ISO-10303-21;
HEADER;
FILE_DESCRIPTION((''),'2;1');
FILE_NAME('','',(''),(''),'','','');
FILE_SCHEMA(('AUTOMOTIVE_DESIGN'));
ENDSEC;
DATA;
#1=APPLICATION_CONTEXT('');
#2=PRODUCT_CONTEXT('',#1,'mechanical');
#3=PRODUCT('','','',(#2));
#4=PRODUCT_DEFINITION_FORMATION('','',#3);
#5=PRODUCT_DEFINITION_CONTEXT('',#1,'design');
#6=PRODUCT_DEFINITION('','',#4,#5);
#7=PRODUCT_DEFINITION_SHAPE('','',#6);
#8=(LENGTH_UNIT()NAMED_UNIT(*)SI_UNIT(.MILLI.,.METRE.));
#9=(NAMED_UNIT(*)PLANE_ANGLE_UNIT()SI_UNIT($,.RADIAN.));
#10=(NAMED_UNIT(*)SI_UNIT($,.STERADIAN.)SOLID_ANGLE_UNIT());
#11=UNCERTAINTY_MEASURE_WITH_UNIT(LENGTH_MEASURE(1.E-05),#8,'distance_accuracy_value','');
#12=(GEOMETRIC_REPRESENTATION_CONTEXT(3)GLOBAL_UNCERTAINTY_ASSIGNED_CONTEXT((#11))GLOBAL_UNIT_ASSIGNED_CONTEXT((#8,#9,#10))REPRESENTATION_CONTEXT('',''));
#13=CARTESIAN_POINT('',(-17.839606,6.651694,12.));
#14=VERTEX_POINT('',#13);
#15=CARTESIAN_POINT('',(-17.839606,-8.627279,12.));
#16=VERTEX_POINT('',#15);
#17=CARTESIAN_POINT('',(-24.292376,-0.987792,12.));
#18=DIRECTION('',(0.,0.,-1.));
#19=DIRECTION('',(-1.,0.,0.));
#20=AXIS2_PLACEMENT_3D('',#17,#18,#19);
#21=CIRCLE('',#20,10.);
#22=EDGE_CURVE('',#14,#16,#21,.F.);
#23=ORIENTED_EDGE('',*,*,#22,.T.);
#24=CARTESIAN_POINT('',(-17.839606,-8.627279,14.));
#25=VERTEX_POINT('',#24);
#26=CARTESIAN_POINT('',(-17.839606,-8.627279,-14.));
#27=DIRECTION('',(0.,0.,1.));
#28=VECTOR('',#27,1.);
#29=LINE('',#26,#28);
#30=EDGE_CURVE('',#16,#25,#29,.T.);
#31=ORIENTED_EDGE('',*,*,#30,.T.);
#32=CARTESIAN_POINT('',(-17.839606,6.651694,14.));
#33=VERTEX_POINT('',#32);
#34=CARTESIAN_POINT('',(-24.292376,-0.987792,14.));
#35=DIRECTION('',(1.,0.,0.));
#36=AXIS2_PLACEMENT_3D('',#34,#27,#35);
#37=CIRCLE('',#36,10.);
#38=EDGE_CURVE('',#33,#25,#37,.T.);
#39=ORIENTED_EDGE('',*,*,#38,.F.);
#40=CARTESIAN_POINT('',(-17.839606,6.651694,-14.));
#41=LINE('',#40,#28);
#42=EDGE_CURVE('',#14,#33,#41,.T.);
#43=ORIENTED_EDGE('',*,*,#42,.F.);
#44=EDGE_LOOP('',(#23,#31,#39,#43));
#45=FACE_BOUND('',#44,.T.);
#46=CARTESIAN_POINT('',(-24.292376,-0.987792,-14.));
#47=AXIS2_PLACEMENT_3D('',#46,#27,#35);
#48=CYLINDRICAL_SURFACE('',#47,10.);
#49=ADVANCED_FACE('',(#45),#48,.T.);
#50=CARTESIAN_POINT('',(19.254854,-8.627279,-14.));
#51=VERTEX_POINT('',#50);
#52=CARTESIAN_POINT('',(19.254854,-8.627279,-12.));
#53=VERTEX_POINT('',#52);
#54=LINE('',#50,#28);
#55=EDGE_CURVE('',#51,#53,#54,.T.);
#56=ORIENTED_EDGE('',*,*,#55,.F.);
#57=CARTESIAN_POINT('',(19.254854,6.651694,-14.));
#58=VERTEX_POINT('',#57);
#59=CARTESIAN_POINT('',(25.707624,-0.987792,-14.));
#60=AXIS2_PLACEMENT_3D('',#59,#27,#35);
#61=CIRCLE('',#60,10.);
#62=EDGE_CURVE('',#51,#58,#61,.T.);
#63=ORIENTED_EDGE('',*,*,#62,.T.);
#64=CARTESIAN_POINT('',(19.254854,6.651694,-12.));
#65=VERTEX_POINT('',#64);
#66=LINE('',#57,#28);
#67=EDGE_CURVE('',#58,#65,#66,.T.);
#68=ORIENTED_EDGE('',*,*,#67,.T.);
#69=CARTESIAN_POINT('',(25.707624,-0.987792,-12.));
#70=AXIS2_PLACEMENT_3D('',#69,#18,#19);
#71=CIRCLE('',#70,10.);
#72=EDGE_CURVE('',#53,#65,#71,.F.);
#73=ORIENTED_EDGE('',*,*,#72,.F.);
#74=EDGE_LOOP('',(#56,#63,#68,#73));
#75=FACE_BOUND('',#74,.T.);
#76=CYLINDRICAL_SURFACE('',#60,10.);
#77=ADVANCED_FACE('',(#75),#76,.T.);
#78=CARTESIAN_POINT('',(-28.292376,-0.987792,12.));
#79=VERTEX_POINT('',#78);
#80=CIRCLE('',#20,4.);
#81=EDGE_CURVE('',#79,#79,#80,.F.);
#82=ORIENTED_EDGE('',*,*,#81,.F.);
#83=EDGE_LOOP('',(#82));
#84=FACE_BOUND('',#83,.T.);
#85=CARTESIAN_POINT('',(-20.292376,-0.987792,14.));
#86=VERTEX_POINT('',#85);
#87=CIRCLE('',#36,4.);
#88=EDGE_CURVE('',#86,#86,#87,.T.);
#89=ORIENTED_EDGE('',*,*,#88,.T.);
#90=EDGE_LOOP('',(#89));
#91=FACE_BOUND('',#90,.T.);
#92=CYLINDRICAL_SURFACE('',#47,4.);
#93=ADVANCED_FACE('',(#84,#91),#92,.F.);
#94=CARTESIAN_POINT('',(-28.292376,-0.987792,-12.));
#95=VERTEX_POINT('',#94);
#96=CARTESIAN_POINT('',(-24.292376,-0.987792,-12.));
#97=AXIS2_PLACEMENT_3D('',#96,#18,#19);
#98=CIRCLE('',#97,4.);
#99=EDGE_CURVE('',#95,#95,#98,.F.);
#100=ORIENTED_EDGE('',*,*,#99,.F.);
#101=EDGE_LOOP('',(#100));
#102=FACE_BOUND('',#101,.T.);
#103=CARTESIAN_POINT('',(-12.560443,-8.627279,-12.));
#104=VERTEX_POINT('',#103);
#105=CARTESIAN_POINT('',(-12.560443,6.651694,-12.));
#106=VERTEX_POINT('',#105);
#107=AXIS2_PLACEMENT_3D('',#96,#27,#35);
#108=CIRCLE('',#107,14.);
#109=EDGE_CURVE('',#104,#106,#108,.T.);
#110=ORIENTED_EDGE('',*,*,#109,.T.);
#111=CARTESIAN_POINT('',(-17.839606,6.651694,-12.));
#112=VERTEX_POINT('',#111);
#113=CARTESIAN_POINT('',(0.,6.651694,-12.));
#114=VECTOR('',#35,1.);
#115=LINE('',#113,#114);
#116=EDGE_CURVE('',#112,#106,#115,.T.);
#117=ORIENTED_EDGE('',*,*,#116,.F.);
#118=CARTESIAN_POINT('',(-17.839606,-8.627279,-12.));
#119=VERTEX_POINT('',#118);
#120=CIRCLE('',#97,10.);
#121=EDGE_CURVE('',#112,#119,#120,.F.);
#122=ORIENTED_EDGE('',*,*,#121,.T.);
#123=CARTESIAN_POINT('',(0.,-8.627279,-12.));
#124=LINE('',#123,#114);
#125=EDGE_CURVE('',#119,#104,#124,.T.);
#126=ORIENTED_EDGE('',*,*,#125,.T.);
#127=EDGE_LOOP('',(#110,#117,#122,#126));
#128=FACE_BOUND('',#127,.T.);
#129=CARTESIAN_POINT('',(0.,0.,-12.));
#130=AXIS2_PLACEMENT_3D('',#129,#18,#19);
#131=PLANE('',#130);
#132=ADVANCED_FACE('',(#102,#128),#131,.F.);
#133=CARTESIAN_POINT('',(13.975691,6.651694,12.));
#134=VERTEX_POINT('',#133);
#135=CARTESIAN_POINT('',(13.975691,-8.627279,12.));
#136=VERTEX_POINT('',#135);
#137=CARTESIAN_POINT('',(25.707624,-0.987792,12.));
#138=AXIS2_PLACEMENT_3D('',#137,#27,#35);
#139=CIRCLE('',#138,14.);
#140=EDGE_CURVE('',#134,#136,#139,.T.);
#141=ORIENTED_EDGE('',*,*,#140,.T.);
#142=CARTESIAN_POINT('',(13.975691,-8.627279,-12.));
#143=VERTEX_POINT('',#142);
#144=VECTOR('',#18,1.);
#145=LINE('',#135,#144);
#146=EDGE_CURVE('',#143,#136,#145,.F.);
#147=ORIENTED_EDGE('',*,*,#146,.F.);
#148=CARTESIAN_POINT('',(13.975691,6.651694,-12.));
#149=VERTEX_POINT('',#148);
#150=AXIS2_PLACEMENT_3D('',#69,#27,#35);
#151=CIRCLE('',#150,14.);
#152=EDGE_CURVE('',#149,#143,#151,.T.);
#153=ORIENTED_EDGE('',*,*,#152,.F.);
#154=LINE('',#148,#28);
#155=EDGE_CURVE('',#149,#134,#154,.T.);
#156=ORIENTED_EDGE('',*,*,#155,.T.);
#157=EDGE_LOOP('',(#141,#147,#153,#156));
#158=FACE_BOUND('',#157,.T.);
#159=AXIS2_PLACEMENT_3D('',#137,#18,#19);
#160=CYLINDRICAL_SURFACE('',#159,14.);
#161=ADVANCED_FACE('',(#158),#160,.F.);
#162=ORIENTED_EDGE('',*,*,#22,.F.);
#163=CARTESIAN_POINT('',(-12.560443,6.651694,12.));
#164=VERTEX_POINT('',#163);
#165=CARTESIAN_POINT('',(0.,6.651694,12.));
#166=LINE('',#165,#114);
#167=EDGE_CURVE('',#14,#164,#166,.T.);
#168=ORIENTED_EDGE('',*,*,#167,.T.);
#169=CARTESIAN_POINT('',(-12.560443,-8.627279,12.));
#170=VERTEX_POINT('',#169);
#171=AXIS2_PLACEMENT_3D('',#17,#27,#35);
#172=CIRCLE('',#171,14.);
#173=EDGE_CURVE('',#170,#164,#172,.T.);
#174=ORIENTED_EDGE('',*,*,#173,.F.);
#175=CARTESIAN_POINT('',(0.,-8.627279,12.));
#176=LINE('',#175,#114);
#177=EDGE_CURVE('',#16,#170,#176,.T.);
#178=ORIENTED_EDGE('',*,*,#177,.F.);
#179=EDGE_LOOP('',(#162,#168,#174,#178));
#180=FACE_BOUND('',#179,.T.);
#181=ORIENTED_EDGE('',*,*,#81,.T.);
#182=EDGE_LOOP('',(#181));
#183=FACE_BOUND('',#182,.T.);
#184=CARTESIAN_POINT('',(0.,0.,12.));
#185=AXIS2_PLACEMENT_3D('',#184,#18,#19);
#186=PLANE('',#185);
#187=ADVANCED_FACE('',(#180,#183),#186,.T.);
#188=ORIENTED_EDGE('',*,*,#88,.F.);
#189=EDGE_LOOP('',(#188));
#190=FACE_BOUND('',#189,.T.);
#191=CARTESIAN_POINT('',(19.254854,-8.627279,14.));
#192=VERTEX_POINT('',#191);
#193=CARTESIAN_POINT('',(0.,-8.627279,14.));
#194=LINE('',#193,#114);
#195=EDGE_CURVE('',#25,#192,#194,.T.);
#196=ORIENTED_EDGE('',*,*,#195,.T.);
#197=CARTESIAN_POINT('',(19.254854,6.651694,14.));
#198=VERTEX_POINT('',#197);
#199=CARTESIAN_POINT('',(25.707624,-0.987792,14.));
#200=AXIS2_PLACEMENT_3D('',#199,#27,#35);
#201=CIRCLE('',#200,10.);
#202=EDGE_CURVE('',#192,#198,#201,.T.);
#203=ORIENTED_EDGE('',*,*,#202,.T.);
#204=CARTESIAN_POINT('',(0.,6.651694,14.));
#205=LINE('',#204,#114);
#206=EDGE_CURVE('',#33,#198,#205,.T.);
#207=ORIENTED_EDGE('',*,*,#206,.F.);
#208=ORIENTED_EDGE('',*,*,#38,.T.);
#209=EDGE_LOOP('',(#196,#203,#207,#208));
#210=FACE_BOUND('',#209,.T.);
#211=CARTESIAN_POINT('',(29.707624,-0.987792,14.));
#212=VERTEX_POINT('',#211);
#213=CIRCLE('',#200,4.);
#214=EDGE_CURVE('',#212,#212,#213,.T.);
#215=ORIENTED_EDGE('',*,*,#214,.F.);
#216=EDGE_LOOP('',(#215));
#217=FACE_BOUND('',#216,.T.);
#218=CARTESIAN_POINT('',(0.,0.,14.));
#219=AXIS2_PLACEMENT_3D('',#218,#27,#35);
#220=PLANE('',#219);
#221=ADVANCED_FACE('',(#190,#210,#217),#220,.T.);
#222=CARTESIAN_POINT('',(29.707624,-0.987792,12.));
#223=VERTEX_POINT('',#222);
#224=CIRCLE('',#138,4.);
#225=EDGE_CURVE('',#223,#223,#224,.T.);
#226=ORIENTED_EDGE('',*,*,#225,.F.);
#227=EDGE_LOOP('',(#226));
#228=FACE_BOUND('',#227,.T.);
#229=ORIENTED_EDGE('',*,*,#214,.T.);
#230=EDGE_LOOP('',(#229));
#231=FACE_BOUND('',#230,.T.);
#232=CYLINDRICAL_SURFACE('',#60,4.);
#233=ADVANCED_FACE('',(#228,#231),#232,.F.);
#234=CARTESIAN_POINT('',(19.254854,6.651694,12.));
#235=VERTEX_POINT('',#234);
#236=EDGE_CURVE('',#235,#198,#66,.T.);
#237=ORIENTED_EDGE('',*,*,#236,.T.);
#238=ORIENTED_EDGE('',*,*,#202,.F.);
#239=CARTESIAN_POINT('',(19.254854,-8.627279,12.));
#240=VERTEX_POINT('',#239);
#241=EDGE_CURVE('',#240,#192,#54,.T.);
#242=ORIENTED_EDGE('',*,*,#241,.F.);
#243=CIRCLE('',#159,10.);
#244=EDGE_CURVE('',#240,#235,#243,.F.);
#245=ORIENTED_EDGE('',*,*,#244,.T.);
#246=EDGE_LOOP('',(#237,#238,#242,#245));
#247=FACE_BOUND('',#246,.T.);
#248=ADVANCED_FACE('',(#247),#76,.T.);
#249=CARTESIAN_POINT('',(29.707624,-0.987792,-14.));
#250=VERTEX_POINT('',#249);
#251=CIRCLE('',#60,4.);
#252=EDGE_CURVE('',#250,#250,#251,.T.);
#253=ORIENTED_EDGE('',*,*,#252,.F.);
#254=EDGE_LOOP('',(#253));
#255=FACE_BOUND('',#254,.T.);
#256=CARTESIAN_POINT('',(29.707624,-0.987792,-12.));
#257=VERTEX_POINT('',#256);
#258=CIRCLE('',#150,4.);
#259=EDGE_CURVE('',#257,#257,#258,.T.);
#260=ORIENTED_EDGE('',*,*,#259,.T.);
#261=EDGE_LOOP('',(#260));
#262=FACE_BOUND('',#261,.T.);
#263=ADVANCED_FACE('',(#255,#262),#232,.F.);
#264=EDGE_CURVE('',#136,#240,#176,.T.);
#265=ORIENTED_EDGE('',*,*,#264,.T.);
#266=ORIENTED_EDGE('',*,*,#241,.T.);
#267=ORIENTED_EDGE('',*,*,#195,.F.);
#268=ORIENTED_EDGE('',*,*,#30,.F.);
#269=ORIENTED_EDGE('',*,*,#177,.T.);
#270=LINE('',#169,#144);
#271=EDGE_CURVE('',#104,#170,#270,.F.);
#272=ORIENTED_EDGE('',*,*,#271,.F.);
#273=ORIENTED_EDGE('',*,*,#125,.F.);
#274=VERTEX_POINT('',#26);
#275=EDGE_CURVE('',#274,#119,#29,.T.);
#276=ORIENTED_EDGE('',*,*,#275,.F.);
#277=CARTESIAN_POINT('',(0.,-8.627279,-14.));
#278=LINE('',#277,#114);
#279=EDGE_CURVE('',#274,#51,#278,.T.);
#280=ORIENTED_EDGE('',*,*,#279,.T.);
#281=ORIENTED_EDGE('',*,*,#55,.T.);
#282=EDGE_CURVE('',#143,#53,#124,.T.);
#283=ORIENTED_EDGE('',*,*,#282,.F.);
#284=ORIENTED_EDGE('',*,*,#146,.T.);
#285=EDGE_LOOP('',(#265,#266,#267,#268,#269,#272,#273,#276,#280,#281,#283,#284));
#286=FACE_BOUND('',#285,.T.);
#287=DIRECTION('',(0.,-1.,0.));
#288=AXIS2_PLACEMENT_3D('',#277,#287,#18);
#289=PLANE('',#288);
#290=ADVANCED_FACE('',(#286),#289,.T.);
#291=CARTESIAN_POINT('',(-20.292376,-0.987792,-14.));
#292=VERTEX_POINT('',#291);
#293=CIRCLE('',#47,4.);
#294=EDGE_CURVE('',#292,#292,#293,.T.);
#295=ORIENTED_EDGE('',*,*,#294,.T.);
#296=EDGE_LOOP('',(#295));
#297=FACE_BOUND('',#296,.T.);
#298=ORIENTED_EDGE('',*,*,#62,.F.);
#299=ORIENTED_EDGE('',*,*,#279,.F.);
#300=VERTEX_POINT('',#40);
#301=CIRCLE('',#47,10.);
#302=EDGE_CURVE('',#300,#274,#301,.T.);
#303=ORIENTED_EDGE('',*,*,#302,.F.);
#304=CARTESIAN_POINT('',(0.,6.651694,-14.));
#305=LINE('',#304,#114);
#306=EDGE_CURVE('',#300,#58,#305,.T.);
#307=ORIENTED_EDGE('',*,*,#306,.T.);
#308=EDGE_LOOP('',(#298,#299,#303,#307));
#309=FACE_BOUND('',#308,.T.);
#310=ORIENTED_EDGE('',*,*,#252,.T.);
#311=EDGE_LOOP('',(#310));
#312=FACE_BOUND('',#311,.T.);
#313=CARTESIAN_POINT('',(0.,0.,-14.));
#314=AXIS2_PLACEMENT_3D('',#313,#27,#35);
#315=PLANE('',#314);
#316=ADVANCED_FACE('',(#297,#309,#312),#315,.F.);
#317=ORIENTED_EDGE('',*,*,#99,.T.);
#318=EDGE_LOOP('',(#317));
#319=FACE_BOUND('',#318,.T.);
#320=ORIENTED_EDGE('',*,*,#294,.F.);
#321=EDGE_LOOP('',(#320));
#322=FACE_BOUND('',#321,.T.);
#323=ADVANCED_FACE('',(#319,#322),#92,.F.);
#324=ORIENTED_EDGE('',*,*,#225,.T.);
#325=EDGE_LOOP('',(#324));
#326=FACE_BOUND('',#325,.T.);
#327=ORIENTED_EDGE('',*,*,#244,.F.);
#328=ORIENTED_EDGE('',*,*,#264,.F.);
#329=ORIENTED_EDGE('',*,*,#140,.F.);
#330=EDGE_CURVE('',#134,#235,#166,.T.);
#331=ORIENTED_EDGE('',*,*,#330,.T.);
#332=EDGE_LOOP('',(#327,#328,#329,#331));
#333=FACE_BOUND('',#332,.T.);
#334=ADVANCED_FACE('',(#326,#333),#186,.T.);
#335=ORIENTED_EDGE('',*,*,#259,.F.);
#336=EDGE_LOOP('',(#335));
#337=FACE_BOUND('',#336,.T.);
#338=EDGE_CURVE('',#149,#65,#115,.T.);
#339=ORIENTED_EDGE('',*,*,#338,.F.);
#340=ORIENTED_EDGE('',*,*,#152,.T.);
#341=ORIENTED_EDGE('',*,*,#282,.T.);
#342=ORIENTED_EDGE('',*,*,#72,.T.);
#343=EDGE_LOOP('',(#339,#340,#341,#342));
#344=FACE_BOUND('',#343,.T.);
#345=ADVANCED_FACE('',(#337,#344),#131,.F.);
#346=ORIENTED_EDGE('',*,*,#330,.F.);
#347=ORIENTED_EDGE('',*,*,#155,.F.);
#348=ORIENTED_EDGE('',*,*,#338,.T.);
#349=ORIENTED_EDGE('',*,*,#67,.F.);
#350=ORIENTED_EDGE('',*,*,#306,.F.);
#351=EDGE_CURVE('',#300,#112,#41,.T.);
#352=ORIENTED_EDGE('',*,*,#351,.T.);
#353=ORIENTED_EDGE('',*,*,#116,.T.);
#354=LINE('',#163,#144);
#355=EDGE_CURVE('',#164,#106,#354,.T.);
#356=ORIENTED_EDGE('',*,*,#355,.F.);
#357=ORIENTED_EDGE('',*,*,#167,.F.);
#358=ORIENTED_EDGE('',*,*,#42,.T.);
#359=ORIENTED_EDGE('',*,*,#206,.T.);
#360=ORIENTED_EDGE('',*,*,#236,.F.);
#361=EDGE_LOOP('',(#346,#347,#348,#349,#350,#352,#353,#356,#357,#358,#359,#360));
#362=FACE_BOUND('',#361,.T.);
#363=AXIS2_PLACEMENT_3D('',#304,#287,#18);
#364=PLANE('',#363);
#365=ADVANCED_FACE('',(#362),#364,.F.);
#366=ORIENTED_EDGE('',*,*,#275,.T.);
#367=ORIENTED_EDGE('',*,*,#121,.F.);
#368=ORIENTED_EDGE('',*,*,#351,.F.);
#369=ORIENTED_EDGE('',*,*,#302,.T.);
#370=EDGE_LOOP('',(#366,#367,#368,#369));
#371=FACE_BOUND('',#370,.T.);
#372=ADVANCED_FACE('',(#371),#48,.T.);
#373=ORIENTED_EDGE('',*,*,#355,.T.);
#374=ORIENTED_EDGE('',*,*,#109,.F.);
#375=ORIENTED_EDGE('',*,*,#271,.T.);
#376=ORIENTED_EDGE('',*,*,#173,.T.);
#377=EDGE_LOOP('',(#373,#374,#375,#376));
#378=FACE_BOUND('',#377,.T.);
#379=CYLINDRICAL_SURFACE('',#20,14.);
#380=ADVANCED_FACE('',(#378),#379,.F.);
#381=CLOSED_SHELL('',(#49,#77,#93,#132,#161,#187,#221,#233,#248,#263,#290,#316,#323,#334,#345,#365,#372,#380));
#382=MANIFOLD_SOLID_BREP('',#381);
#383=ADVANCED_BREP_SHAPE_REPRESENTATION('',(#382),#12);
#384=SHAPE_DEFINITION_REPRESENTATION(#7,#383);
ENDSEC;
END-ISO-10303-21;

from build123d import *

# Parameters (mm, degrees)
BOSS_EXTRUDE1_DEPTH         = 14
BOSS_EXTRUDE1_DEPTH_BACK    = 14
SKETCH1_R                   = 4
CUT_EXTRUDE_THIN9_START     = -12
CUT_EXTRUDE_THIN9_OUTLINE_R = 4
CUT_EXTRUDE_THIN9_DEPTH     = 24


# Read off the part's stored shape, not the designer's step: Cut-Extrude-Thin9
with BuildPart() as part:
    # Sketch1 → Boss-Extrude1 (new, two sides: drawn at the far end of the back side and taken through both)
    with BuildSketch(Plane.XY.offset(-BOSS_EXTRUDE1_DEPTH_BACK)):
        with BuildLine():
            ThreePointArc((-17.839605582, 6.651694239), (-34.292375842, -0.987792391), (-17.839605582, -8.627279021))
            Line((-17.839605582, -8.627279021), (19.254853898, -8.627279021))
            ThreePointArc((19.254853898, -8.627279021), (35.707624158, -0.987792391), (19.254853898, 6.651694239))
            Line((19.254853898, 6.651694239), (-17.839605582, 6.651694239))
        make_face()
        with Locations((-24.292375842, -0.987792391)):
            Circle(SKETCH1_R, mode=Mode.SUBTRACT)
        with Locations((25.707624158, -0.987792391)):
            Circle(SKETCH1_R, mode=Mode.SUBTRACT)
    extrude(amount=BOSS_EXTRUDE1_DEPTH + BOSS_EXTRUDE1_DEPTH_BACK)

    # Cut-Extrude-Thin9 outline → Cut-Extrude-Thin9 (cut)
    # profile 1 of 2: a face of its own
    with BuildSketch(Plane.XY.offset(CUT_EXTRUDE_THIN9_START)):
        with BuildLine():
            ThreePointArc((13.975691494, 6.651694239), (11.707624158, -0.987792391), (13.975691494, -8.627279021))
            Line((13.975691494, -8.627279021), (19.254853898, -8.627279021))
            ThreePointArc((19.254853898, -8.627279021), (35.707624158, -0.987792391), (19.254853898, 6.651694239))
            Line((19.254853898, 6.651694239), (13.975691494, 6.651694239))
        make_face()
        with Locations((25.707624158, -0.987792391)):
            Circle(CUT_EXTRUDE_THIN9_OUTLINE_R, mode=Mode.SUBTRACT)
    # profile 2 of 2: a face of its own
    with BuildSketch(Plane.XY.offset(CUT_EXTRUDE_THIN9_START)):
        with BuildLine():
            Line((-17.839605582, -8.627279021), (-12.560443178, -8.627279021))
            ThreePointArc((-12.560443178, -8.627279021), (-10.292375842, -0.987792391), (-12.560443178, 6.651694239))
            Line((-12.560443178, 6.651694239), (-17.839605582, 6.651694239))
            ThreePointArc((-17.839605582, 6.651694239), (-34.292375842, -0.987792391), (-17.839605582, -8.627279021))
        make_face()
        with Locations((-24.292375842, -0.987792391)):
            Circle(CUT_EXTRUDE_THIN9_OUTLINE_R, mode=Mode.SUBTRACT)
    extrude(amount=CUT_EXTRUDE_THIN9_DEPTH, mode=Mode.SUBTRACT)


solid = part.part
